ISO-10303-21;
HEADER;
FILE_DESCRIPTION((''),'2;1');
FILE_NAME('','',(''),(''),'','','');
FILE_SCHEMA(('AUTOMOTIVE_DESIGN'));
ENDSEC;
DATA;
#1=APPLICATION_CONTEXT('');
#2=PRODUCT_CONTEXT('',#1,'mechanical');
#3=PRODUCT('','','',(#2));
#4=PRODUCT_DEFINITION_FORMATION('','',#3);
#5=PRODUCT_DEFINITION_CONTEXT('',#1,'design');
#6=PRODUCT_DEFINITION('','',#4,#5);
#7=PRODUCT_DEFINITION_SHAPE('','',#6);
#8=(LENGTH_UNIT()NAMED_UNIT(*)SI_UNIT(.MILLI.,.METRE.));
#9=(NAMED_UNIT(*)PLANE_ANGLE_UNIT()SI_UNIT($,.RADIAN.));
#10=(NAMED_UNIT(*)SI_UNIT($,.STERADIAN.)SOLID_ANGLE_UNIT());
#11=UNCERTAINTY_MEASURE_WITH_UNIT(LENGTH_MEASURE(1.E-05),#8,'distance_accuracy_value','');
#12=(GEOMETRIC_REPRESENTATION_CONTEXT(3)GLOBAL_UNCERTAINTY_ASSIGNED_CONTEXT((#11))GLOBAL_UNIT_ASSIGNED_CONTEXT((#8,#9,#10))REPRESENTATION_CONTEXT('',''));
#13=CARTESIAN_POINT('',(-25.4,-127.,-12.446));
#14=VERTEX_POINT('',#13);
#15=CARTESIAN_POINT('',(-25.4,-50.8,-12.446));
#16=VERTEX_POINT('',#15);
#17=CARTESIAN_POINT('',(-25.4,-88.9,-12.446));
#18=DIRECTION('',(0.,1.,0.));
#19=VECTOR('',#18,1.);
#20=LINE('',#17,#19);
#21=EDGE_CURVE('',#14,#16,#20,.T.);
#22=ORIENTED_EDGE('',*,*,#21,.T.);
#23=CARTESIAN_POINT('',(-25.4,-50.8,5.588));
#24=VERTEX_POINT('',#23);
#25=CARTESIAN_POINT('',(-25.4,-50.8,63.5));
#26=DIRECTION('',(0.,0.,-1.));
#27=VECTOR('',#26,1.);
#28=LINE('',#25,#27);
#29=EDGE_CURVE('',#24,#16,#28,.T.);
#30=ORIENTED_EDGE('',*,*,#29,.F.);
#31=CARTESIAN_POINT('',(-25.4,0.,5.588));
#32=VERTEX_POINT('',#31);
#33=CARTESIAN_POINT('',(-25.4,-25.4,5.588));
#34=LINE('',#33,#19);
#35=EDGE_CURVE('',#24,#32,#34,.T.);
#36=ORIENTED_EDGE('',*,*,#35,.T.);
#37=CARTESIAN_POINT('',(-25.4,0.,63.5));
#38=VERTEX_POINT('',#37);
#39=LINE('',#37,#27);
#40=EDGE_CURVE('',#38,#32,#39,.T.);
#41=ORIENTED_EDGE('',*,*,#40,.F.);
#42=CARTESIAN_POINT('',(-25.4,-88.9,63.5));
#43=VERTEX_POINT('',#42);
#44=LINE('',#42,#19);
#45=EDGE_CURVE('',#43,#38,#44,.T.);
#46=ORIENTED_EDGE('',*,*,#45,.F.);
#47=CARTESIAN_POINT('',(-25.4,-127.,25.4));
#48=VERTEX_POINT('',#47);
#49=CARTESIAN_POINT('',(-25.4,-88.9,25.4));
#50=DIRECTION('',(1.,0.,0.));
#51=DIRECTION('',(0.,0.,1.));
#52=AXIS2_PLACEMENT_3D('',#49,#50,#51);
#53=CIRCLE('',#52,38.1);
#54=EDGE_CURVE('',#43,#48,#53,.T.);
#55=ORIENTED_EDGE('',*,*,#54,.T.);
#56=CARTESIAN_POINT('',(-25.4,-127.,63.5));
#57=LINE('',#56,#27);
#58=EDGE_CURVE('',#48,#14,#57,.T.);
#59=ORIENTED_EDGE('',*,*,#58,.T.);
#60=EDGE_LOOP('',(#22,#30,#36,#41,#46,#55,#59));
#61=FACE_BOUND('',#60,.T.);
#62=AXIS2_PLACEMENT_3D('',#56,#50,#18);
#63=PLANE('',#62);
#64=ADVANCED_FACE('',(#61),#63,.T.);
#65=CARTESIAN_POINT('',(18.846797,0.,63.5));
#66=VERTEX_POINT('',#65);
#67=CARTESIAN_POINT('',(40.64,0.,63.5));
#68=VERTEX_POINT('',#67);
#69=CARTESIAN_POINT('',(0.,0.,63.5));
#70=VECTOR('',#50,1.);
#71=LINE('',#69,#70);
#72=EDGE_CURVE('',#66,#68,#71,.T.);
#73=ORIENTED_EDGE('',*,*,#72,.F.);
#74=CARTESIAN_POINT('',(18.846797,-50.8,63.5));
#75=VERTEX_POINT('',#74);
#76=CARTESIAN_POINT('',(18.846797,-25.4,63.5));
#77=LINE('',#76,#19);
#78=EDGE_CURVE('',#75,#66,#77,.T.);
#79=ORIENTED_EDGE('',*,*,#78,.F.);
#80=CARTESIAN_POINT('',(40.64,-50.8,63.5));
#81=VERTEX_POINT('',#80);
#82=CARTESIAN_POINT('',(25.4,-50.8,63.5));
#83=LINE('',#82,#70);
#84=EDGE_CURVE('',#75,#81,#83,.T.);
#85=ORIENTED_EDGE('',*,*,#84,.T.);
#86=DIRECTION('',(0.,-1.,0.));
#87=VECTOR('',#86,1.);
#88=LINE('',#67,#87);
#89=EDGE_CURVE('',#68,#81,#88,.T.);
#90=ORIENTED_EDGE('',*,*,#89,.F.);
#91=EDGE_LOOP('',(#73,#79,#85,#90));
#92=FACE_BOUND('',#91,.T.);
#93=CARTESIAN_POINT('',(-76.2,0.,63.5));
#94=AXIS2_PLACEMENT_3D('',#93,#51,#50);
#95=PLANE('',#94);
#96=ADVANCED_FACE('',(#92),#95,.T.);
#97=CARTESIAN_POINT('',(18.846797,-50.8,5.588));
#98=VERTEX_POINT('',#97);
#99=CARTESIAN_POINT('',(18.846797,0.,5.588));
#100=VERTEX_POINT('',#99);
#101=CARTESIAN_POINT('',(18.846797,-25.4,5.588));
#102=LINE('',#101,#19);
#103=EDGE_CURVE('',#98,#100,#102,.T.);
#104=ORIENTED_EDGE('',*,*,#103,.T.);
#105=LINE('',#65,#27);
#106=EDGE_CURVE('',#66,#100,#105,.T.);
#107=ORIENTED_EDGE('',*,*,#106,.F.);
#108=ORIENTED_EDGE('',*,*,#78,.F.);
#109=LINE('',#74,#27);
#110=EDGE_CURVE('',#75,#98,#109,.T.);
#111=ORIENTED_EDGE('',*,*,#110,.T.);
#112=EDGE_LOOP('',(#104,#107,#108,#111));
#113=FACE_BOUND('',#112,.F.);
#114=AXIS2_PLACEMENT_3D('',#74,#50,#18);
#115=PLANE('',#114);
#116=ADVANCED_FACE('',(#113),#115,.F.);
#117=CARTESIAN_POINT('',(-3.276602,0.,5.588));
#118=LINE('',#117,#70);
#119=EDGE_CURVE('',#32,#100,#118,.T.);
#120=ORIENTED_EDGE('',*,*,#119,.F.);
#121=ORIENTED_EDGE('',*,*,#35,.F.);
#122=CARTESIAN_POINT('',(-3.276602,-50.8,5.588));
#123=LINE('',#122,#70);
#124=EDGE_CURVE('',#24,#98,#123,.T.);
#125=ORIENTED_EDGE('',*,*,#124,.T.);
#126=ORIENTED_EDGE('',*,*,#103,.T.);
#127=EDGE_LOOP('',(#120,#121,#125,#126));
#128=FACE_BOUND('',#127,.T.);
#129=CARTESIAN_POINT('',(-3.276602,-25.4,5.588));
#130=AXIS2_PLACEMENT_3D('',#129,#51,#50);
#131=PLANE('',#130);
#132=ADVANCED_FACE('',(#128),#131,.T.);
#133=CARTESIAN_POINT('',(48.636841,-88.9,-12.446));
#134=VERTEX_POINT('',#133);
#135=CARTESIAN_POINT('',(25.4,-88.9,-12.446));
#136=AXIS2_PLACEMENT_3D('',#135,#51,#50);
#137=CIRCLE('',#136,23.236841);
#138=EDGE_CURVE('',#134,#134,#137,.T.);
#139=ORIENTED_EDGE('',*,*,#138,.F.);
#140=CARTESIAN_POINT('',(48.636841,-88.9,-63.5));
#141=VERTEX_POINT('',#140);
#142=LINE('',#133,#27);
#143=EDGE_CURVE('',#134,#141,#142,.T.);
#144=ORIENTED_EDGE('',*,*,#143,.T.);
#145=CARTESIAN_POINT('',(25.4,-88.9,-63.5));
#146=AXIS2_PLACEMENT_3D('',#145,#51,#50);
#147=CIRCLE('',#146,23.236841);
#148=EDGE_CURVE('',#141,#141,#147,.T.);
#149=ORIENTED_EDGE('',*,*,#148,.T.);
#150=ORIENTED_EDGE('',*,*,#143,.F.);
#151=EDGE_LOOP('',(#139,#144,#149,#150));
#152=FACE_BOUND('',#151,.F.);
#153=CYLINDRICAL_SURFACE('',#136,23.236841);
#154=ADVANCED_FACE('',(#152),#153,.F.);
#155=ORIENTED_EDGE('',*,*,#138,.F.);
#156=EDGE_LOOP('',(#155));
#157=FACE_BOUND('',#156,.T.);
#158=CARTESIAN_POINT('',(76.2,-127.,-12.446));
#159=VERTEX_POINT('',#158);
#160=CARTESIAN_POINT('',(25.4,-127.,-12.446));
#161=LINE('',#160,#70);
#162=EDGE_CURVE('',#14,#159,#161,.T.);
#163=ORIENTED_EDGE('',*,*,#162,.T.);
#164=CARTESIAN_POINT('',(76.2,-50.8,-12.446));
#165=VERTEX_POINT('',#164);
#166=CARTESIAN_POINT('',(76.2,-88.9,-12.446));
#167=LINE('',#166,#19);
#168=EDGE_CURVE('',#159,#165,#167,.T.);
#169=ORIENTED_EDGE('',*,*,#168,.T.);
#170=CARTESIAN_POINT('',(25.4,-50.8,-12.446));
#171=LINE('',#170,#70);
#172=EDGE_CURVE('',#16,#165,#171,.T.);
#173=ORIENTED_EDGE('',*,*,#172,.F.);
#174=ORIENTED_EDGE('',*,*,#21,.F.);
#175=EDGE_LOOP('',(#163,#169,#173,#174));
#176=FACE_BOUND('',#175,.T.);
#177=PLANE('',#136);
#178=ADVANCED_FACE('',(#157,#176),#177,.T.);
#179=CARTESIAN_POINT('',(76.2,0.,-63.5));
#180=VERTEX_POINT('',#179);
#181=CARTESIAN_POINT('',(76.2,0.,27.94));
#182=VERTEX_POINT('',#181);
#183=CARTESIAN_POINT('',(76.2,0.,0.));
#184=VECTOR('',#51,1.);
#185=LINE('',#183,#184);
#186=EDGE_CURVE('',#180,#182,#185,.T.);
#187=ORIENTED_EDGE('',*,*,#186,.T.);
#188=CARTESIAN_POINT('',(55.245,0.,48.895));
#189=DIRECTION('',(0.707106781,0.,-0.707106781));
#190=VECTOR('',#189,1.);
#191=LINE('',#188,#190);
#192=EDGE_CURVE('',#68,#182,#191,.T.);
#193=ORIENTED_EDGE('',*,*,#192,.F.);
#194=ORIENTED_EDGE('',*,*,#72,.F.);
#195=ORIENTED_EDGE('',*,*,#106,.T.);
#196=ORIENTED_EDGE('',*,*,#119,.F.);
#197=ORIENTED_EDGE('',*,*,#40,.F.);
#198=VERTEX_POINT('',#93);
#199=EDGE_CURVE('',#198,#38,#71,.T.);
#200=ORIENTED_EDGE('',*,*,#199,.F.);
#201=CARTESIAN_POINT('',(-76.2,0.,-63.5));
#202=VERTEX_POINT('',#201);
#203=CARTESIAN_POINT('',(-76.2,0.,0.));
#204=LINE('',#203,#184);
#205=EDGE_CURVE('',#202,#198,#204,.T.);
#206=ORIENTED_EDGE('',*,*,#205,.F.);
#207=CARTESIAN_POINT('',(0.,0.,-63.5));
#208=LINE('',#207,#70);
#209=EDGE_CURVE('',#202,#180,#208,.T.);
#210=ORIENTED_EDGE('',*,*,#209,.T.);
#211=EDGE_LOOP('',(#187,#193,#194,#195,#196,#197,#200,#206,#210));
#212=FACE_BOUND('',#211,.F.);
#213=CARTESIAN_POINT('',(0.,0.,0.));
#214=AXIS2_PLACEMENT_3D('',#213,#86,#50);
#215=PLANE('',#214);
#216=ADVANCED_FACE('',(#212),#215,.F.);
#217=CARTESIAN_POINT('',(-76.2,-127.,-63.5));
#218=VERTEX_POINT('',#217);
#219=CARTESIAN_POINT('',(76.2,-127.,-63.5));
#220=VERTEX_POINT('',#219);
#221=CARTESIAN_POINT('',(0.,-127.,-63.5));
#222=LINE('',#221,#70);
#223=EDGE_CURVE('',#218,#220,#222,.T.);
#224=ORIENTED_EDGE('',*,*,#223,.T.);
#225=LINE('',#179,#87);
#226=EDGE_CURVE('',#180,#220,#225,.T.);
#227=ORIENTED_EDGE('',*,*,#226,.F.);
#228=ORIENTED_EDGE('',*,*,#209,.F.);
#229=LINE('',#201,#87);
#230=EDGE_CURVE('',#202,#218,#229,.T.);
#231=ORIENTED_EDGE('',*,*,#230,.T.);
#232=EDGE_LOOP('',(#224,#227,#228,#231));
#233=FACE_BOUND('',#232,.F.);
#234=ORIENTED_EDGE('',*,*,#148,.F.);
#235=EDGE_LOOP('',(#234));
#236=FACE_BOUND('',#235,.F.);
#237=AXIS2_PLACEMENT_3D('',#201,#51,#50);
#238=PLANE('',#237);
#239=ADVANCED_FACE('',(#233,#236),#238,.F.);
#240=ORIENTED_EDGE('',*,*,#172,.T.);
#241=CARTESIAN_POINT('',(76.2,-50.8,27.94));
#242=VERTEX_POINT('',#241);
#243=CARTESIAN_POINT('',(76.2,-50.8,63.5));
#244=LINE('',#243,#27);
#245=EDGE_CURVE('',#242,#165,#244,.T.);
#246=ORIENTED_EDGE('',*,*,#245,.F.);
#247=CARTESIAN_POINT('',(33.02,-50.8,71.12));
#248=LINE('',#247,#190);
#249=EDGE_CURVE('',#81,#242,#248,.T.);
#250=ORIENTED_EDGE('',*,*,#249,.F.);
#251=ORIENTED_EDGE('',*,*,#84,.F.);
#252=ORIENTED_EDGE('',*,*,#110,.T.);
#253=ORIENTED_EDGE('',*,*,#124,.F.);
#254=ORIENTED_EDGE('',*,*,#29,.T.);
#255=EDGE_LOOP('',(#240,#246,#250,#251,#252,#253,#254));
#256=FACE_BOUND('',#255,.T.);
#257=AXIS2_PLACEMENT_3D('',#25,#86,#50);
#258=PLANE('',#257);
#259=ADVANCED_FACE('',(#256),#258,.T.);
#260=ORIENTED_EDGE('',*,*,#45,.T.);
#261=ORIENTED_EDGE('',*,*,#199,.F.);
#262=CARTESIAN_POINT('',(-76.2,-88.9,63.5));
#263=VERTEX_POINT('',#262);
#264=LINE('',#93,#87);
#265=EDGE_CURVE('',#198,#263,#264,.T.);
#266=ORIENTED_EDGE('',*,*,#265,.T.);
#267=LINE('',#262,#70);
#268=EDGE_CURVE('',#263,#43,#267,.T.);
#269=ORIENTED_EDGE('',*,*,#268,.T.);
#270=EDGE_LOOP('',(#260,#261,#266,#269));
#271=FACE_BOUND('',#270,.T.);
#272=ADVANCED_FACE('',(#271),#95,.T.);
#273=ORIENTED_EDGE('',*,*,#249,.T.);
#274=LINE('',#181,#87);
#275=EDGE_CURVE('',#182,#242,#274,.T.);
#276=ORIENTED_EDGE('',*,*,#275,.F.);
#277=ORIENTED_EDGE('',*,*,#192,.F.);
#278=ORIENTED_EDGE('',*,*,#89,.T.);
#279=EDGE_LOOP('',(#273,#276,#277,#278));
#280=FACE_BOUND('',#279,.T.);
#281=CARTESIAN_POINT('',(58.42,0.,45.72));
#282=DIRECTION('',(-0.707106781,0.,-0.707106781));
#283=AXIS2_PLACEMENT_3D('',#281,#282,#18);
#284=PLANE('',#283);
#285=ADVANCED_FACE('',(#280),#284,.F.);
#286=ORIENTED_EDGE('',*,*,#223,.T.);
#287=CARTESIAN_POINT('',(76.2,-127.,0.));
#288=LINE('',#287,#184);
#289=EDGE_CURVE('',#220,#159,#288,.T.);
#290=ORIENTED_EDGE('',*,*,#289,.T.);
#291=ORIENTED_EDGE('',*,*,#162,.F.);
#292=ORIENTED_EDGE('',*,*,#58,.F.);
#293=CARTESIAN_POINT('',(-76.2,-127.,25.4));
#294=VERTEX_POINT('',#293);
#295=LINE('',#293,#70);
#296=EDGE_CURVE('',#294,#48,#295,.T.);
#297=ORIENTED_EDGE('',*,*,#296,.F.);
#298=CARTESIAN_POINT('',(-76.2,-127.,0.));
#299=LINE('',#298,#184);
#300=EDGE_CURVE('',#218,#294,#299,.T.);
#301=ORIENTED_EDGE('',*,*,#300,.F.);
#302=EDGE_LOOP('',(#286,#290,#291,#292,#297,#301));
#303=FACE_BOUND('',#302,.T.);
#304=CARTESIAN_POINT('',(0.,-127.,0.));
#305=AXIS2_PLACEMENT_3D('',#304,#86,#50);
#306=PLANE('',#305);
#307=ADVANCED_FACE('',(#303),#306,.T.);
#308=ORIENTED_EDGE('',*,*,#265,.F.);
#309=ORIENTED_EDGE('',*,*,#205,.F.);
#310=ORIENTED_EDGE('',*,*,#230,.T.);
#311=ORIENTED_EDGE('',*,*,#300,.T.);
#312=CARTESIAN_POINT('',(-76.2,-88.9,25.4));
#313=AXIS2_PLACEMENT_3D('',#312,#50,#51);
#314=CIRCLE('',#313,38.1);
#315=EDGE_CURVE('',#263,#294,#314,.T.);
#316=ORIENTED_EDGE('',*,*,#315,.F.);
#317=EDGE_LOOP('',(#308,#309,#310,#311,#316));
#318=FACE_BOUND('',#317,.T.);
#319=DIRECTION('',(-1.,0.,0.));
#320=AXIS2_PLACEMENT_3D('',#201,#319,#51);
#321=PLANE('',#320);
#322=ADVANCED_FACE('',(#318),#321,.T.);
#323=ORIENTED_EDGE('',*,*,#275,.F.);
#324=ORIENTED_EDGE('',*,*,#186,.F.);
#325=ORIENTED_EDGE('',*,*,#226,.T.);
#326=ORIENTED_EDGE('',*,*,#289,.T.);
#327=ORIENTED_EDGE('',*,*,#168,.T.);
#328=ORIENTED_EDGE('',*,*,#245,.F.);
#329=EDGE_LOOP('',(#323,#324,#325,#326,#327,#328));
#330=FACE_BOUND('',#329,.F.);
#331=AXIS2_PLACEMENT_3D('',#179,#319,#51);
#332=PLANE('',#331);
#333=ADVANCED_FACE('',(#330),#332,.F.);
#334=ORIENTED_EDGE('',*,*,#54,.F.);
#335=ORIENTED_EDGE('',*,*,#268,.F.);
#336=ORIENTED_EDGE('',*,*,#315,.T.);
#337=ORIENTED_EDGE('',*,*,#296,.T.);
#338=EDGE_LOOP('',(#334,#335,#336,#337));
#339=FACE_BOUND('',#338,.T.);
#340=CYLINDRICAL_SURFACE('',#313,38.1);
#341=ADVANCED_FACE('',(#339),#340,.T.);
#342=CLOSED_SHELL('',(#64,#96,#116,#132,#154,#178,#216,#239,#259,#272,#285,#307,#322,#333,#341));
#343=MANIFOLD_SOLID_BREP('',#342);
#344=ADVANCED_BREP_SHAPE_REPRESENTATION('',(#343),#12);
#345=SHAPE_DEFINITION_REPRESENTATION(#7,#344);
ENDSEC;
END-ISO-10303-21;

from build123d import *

# Parameters (mm, degrees)
F0_W     = 152.4
F0_H     = 127
F1_DEPTH = 127
F2_W     = 101.6
F2_H     = 76.2
F3_DEPTH = 75.946
F4_R     = 23.2368410965
F5_DEPTH = 177.8
F6_R     = 38.1
F7_SIZE  = 35.56
F8_W     = 44.2467968255
F8_H     = 50.8
F9_DEPTH = 57.912


# Not quite as in the source:
# - a feature names something its author has since deleted; it is built from what else it names


with BuildPart() as f1:
    # F0 (on Front) → F1 (new body)
    with BuildSketch(Plane.XZ):
        Rectangle(F0_W, F0_H)
    extrude(amount=F1_DEPTH)

    # F2 (on face) → F3 (cut)
    with BuildSketch(Plane.XY.offset(63.5)):
        with Locations((25.4, -88.9)):
            Rectangle(F2_W, F2_H)
    extrude(amount=-F3_DEPTH, mode=Mode.SUBTRACT)

    # F4 (on face) → F5 (cut)
    with BuildSketch(Plane.XY.offset(-12.446)):
        with Locations((25.4, -88.9)):
            Circle(F4_R)
    extrude(amount=-F5_DEPTH, mode=Mode.SUBTRACT)

    # F6
    f6_edges = [f1.edges().sort_by_distance(p)[0] for p in [
        (-50.8, -127, 63.5),
    ]]
    fillet(f6_edges, radius=F6_R)

    # F7
    f7_edges = [f1.edges().sort_by_distance(p)[0] for p in [
        (76.2, -25.4, 63.5),
    ]]
    chamfer(f7_edges, length=F7_SIZE)

    # F8 (on face) → F9 (cut)
    with BuildSketch(Plane.XY.offset(63.5)):
        with Locations((-3.2766015872, -25.4)):
            Rectangle(F8_W, F8_H)
    extrude(amount=-F9_DEPTH, mode=Mode.SUBTRACT)


solid = f1.part
